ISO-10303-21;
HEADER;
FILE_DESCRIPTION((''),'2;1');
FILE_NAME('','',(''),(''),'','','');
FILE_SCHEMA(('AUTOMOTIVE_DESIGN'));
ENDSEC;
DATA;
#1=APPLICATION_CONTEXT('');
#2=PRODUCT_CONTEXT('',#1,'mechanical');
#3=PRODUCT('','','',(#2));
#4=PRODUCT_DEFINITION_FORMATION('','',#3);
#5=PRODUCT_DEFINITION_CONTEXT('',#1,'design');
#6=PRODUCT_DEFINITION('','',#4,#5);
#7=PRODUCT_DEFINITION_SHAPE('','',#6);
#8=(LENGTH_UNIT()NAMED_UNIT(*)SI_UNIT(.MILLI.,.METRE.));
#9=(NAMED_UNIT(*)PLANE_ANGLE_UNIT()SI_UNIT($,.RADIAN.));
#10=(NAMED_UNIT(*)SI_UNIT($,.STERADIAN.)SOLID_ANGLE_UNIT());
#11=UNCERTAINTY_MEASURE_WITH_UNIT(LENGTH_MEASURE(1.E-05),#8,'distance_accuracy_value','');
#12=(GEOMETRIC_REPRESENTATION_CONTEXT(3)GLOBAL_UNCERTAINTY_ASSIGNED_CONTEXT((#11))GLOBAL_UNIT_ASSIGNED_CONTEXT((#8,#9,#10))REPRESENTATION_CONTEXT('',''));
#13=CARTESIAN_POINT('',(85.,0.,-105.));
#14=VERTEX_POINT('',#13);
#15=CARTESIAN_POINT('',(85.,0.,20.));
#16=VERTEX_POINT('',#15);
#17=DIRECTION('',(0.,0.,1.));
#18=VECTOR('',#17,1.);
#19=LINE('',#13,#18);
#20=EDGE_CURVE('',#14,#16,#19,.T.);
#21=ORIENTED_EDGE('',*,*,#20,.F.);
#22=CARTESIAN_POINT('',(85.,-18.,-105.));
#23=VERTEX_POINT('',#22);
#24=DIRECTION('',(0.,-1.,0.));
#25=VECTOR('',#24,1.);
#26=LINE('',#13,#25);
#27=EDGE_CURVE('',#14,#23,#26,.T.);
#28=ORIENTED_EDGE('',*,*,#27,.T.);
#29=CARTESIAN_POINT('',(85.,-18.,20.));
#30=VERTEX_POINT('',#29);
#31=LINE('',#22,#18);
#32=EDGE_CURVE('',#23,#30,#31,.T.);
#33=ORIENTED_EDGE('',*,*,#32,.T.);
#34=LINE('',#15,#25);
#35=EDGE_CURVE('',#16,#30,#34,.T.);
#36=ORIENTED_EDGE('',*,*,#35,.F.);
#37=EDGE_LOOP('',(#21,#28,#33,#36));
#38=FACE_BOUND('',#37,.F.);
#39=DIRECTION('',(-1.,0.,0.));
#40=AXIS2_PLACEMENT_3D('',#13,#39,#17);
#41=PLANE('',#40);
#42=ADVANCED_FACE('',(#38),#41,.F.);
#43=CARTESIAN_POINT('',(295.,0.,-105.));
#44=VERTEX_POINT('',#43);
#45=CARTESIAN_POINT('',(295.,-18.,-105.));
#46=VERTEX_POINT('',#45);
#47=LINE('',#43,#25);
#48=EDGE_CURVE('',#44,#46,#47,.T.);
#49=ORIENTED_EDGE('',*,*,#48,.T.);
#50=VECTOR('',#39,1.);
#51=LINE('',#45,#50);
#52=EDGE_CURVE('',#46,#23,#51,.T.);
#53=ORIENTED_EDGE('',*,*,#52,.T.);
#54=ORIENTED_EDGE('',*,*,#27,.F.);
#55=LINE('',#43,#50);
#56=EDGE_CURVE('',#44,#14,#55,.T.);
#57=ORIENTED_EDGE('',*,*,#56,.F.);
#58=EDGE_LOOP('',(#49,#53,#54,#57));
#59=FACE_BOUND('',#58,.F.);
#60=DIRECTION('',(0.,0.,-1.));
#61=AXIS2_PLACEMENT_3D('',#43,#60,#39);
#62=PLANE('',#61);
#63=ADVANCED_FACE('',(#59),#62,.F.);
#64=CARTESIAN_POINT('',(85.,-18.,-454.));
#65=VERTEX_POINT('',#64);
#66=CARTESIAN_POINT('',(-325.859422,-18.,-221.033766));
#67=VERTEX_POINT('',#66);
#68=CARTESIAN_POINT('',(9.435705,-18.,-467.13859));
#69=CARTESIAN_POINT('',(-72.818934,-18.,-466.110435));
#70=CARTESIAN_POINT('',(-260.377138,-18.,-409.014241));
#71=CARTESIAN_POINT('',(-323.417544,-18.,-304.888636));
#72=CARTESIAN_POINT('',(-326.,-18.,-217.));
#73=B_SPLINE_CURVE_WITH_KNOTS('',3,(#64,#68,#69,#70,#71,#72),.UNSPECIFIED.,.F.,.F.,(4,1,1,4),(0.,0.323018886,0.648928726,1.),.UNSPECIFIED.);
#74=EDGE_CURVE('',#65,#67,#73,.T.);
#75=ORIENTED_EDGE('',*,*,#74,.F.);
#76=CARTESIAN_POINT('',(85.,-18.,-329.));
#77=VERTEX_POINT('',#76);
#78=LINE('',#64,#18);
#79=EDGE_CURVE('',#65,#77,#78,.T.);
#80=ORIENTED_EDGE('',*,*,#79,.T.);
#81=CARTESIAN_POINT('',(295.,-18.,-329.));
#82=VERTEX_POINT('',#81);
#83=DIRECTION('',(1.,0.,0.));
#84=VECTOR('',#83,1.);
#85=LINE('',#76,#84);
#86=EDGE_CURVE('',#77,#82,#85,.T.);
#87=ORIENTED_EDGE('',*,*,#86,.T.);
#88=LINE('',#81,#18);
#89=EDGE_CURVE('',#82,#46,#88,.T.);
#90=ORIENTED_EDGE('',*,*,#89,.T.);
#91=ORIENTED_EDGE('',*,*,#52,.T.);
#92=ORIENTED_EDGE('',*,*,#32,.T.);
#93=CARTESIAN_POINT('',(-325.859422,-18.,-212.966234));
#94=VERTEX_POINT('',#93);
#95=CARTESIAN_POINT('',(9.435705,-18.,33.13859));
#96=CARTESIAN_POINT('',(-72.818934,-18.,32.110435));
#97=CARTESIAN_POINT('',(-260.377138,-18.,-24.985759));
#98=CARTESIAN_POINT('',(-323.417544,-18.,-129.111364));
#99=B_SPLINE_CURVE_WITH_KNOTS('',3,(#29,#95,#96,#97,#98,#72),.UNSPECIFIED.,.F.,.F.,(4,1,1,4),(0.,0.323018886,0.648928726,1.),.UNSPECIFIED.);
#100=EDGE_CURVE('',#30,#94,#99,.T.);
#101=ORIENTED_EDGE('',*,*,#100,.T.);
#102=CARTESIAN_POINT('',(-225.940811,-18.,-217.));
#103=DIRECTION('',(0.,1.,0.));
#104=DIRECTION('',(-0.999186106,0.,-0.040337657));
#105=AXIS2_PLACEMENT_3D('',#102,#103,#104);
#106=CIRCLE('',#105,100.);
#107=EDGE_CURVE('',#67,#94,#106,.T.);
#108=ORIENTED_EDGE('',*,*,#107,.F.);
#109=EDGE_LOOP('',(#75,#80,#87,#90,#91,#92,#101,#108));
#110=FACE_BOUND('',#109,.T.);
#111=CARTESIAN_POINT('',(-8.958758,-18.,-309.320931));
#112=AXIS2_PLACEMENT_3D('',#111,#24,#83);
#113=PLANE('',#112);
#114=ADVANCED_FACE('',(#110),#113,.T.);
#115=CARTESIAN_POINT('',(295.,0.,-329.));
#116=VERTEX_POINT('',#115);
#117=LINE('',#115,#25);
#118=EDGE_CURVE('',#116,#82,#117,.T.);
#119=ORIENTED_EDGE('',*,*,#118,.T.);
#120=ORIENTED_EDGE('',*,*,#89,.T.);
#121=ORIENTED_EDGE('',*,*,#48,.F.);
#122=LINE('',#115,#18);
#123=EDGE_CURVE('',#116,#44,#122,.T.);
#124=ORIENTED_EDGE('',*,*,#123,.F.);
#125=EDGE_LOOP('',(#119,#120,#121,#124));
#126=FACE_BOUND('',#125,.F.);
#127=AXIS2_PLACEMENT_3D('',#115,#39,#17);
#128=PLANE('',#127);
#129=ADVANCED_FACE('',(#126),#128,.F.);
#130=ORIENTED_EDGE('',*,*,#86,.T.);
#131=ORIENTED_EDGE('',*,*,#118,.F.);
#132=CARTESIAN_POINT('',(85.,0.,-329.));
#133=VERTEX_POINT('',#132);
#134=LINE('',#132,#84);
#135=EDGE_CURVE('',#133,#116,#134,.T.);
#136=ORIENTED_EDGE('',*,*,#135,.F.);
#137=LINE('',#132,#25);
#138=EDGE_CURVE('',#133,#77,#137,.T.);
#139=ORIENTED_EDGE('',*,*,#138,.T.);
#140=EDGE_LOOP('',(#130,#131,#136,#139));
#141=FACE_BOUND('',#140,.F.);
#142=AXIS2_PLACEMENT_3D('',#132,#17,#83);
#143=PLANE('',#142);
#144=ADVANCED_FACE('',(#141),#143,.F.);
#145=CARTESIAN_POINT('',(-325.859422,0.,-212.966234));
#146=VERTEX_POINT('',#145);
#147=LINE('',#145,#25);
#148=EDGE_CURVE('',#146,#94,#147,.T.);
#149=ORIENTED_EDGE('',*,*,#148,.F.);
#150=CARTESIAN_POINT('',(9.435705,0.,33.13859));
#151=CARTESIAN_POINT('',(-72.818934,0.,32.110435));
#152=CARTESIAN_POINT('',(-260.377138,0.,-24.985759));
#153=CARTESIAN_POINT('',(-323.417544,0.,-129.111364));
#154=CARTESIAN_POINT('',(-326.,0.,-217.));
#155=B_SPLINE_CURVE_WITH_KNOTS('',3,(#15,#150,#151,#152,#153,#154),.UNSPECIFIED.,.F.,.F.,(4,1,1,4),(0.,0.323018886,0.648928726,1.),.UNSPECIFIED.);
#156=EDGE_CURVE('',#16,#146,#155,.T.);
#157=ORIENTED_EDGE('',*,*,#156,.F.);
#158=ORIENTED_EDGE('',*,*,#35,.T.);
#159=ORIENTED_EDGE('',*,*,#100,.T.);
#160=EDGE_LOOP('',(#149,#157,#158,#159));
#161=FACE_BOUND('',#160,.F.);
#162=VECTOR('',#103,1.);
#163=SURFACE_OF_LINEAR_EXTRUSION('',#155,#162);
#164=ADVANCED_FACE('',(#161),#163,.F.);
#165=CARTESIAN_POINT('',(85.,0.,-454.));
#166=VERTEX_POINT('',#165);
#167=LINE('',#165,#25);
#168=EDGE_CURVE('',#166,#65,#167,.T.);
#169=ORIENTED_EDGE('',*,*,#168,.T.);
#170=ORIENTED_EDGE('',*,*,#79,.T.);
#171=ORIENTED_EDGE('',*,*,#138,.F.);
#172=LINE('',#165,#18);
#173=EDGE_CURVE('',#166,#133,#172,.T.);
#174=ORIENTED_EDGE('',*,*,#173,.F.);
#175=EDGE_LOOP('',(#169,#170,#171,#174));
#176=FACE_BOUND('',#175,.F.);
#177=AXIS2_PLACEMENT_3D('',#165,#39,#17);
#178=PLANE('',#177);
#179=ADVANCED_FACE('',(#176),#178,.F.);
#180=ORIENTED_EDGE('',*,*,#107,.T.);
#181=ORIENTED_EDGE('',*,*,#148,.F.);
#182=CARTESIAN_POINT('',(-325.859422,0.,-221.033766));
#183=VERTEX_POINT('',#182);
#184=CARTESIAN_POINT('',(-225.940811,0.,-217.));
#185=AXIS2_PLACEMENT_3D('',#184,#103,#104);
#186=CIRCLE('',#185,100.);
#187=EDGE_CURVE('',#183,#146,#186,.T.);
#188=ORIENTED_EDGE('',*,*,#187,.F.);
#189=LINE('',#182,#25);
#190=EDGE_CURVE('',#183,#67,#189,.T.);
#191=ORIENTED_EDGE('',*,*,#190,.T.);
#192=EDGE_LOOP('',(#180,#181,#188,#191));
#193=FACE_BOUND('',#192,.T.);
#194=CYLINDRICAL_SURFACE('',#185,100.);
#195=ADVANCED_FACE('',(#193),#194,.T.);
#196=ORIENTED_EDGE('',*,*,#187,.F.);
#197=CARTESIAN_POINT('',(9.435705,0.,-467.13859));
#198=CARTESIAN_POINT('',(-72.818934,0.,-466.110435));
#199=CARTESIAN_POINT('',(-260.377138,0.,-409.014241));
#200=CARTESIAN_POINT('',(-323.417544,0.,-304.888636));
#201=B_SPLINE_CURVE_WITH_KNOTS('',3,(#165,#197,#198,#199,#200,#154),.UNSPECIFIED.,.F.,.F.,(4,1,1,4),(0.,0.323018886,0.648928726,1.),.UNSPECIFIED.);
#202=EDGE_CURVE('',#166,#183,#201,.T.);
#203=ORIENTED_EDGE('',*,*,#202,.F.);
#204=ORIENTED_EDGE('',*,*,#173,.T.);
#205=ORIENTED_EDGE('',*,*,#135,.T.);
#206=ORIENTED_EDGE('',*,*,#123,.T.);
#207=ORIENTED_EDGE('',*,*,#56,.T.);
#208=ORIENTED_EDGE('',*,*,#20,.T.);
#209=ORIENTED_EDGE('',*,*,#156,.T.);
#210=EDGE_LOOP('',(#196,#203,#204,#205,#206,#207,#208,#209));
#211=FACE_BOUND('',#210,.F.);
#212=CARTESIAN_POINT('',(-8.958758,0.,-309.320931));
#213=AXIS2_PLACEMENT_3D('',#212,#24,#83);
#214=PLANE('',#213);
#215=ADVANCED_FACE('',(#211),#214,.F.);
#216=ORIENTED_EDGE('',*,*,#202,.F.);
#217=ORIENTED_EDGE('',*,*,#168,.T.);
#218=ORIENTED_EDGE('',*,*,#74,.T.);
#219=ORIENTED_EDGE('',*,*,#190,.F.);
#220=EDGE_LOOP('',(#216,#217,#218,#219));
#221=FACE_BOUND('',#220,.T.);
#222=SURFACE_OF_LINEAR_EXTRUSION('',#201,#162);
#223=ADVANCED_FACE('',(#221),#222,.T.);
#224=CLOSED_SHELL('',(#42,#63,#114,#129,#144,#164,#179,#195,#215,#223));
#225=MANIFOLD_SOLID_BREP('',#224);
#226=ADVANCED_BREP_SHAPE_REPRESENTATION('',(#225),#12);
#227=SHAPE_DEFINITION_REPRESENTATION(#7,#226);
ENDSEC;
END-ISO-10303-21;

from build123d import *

# Parameters (mm, degrees)
F1_DEPTH    = 18
F2_T1_DEPTH = 18


# Not quite as in the source:
# - a fillet or chamfer that OpenCascade refuses, or shapes differently, is made with other operations: its cross-section is extruded or revolved along the edge and cut away or added


with BuildPart() as f1:
    # F0 (on Front) → F1 (new body)
    with BuildSketch(Plane.XZ):
        with BuildLine():
            Line((295, -217), (-326, -217))
            add(Edge.make_bspline(
                [(85, -454), (9.4357049053, -467.1385897042), (-72.818934134, -466.1104352643), (-260.3771381726, -409.0142413584), (-323.4175443649, -304.8886355162), (-326, -217)],
                knots=[0, 0, 0, 0, 0.3230188863, 0.6489287258, 1, 1, 1, 1], degree=3))
            Line((85, -454), (85, -329))
            Line((85, -329), (295, -329))
            Line((295, -329), (295, -217))
        make_face()
        with BuildLine():
            add(Edge.make_bspline(
                [(85, 20), (9.4357049053, 33.1385897042), (-72.818934134, 32.1104352643), (-260.3771381726, -24.9857586416), (-323.4175443649, -129.1113644838), (-326, -217)],
                knots=[0, 0, 0, 0, 0.3230188863, 0.6489287258, 1, 1, 1, 1], degree=3))
            Line((-326, -217), (295, -217))
            Line((295, -217), (295, -105))
            Line((295, -105), (85, -105))
            Line((85, -105), (85, 20))
        make_face()
    extrude(amount=F1_DEPTH)

    # F2: fillet of radius 100 on 1 edges, made by hand

    # F2_s2 → F2_t1 (cut)
    with BuildSketch(Plane.XZ):
        with BuildLine():
            ThreePointArc((-325.8594220148, -221.0337656795), (-325.9408114638, -217), (-325.8594220148, -212.9662343205))
            Line((-325.8594220148, -212.9662343205), (-327.8577942258, -212.8855590069))
            ThreePointArc((-327.8577942258, -212.8855590069), (-327.9340315871, -214.9132915531), (-327.999137182, -216.9412588095))
            Line((-327.999137182, -216.9412588095), (-327.999137182, -217.0587411905))
            ThreePointArc((-327.999137182, -217.0587411905), (-327.9340315871, -219.0867084469), (-327.8577942258, -221.1144409931))
            Line((-327.8577942258, -221.1144409931), (-325.8594220148, -221.0337656795))
        make_face()
    extrude(amount=F2_T1_DEPTH, mode=Mode.SUBTRACT)


solid = f1.part
